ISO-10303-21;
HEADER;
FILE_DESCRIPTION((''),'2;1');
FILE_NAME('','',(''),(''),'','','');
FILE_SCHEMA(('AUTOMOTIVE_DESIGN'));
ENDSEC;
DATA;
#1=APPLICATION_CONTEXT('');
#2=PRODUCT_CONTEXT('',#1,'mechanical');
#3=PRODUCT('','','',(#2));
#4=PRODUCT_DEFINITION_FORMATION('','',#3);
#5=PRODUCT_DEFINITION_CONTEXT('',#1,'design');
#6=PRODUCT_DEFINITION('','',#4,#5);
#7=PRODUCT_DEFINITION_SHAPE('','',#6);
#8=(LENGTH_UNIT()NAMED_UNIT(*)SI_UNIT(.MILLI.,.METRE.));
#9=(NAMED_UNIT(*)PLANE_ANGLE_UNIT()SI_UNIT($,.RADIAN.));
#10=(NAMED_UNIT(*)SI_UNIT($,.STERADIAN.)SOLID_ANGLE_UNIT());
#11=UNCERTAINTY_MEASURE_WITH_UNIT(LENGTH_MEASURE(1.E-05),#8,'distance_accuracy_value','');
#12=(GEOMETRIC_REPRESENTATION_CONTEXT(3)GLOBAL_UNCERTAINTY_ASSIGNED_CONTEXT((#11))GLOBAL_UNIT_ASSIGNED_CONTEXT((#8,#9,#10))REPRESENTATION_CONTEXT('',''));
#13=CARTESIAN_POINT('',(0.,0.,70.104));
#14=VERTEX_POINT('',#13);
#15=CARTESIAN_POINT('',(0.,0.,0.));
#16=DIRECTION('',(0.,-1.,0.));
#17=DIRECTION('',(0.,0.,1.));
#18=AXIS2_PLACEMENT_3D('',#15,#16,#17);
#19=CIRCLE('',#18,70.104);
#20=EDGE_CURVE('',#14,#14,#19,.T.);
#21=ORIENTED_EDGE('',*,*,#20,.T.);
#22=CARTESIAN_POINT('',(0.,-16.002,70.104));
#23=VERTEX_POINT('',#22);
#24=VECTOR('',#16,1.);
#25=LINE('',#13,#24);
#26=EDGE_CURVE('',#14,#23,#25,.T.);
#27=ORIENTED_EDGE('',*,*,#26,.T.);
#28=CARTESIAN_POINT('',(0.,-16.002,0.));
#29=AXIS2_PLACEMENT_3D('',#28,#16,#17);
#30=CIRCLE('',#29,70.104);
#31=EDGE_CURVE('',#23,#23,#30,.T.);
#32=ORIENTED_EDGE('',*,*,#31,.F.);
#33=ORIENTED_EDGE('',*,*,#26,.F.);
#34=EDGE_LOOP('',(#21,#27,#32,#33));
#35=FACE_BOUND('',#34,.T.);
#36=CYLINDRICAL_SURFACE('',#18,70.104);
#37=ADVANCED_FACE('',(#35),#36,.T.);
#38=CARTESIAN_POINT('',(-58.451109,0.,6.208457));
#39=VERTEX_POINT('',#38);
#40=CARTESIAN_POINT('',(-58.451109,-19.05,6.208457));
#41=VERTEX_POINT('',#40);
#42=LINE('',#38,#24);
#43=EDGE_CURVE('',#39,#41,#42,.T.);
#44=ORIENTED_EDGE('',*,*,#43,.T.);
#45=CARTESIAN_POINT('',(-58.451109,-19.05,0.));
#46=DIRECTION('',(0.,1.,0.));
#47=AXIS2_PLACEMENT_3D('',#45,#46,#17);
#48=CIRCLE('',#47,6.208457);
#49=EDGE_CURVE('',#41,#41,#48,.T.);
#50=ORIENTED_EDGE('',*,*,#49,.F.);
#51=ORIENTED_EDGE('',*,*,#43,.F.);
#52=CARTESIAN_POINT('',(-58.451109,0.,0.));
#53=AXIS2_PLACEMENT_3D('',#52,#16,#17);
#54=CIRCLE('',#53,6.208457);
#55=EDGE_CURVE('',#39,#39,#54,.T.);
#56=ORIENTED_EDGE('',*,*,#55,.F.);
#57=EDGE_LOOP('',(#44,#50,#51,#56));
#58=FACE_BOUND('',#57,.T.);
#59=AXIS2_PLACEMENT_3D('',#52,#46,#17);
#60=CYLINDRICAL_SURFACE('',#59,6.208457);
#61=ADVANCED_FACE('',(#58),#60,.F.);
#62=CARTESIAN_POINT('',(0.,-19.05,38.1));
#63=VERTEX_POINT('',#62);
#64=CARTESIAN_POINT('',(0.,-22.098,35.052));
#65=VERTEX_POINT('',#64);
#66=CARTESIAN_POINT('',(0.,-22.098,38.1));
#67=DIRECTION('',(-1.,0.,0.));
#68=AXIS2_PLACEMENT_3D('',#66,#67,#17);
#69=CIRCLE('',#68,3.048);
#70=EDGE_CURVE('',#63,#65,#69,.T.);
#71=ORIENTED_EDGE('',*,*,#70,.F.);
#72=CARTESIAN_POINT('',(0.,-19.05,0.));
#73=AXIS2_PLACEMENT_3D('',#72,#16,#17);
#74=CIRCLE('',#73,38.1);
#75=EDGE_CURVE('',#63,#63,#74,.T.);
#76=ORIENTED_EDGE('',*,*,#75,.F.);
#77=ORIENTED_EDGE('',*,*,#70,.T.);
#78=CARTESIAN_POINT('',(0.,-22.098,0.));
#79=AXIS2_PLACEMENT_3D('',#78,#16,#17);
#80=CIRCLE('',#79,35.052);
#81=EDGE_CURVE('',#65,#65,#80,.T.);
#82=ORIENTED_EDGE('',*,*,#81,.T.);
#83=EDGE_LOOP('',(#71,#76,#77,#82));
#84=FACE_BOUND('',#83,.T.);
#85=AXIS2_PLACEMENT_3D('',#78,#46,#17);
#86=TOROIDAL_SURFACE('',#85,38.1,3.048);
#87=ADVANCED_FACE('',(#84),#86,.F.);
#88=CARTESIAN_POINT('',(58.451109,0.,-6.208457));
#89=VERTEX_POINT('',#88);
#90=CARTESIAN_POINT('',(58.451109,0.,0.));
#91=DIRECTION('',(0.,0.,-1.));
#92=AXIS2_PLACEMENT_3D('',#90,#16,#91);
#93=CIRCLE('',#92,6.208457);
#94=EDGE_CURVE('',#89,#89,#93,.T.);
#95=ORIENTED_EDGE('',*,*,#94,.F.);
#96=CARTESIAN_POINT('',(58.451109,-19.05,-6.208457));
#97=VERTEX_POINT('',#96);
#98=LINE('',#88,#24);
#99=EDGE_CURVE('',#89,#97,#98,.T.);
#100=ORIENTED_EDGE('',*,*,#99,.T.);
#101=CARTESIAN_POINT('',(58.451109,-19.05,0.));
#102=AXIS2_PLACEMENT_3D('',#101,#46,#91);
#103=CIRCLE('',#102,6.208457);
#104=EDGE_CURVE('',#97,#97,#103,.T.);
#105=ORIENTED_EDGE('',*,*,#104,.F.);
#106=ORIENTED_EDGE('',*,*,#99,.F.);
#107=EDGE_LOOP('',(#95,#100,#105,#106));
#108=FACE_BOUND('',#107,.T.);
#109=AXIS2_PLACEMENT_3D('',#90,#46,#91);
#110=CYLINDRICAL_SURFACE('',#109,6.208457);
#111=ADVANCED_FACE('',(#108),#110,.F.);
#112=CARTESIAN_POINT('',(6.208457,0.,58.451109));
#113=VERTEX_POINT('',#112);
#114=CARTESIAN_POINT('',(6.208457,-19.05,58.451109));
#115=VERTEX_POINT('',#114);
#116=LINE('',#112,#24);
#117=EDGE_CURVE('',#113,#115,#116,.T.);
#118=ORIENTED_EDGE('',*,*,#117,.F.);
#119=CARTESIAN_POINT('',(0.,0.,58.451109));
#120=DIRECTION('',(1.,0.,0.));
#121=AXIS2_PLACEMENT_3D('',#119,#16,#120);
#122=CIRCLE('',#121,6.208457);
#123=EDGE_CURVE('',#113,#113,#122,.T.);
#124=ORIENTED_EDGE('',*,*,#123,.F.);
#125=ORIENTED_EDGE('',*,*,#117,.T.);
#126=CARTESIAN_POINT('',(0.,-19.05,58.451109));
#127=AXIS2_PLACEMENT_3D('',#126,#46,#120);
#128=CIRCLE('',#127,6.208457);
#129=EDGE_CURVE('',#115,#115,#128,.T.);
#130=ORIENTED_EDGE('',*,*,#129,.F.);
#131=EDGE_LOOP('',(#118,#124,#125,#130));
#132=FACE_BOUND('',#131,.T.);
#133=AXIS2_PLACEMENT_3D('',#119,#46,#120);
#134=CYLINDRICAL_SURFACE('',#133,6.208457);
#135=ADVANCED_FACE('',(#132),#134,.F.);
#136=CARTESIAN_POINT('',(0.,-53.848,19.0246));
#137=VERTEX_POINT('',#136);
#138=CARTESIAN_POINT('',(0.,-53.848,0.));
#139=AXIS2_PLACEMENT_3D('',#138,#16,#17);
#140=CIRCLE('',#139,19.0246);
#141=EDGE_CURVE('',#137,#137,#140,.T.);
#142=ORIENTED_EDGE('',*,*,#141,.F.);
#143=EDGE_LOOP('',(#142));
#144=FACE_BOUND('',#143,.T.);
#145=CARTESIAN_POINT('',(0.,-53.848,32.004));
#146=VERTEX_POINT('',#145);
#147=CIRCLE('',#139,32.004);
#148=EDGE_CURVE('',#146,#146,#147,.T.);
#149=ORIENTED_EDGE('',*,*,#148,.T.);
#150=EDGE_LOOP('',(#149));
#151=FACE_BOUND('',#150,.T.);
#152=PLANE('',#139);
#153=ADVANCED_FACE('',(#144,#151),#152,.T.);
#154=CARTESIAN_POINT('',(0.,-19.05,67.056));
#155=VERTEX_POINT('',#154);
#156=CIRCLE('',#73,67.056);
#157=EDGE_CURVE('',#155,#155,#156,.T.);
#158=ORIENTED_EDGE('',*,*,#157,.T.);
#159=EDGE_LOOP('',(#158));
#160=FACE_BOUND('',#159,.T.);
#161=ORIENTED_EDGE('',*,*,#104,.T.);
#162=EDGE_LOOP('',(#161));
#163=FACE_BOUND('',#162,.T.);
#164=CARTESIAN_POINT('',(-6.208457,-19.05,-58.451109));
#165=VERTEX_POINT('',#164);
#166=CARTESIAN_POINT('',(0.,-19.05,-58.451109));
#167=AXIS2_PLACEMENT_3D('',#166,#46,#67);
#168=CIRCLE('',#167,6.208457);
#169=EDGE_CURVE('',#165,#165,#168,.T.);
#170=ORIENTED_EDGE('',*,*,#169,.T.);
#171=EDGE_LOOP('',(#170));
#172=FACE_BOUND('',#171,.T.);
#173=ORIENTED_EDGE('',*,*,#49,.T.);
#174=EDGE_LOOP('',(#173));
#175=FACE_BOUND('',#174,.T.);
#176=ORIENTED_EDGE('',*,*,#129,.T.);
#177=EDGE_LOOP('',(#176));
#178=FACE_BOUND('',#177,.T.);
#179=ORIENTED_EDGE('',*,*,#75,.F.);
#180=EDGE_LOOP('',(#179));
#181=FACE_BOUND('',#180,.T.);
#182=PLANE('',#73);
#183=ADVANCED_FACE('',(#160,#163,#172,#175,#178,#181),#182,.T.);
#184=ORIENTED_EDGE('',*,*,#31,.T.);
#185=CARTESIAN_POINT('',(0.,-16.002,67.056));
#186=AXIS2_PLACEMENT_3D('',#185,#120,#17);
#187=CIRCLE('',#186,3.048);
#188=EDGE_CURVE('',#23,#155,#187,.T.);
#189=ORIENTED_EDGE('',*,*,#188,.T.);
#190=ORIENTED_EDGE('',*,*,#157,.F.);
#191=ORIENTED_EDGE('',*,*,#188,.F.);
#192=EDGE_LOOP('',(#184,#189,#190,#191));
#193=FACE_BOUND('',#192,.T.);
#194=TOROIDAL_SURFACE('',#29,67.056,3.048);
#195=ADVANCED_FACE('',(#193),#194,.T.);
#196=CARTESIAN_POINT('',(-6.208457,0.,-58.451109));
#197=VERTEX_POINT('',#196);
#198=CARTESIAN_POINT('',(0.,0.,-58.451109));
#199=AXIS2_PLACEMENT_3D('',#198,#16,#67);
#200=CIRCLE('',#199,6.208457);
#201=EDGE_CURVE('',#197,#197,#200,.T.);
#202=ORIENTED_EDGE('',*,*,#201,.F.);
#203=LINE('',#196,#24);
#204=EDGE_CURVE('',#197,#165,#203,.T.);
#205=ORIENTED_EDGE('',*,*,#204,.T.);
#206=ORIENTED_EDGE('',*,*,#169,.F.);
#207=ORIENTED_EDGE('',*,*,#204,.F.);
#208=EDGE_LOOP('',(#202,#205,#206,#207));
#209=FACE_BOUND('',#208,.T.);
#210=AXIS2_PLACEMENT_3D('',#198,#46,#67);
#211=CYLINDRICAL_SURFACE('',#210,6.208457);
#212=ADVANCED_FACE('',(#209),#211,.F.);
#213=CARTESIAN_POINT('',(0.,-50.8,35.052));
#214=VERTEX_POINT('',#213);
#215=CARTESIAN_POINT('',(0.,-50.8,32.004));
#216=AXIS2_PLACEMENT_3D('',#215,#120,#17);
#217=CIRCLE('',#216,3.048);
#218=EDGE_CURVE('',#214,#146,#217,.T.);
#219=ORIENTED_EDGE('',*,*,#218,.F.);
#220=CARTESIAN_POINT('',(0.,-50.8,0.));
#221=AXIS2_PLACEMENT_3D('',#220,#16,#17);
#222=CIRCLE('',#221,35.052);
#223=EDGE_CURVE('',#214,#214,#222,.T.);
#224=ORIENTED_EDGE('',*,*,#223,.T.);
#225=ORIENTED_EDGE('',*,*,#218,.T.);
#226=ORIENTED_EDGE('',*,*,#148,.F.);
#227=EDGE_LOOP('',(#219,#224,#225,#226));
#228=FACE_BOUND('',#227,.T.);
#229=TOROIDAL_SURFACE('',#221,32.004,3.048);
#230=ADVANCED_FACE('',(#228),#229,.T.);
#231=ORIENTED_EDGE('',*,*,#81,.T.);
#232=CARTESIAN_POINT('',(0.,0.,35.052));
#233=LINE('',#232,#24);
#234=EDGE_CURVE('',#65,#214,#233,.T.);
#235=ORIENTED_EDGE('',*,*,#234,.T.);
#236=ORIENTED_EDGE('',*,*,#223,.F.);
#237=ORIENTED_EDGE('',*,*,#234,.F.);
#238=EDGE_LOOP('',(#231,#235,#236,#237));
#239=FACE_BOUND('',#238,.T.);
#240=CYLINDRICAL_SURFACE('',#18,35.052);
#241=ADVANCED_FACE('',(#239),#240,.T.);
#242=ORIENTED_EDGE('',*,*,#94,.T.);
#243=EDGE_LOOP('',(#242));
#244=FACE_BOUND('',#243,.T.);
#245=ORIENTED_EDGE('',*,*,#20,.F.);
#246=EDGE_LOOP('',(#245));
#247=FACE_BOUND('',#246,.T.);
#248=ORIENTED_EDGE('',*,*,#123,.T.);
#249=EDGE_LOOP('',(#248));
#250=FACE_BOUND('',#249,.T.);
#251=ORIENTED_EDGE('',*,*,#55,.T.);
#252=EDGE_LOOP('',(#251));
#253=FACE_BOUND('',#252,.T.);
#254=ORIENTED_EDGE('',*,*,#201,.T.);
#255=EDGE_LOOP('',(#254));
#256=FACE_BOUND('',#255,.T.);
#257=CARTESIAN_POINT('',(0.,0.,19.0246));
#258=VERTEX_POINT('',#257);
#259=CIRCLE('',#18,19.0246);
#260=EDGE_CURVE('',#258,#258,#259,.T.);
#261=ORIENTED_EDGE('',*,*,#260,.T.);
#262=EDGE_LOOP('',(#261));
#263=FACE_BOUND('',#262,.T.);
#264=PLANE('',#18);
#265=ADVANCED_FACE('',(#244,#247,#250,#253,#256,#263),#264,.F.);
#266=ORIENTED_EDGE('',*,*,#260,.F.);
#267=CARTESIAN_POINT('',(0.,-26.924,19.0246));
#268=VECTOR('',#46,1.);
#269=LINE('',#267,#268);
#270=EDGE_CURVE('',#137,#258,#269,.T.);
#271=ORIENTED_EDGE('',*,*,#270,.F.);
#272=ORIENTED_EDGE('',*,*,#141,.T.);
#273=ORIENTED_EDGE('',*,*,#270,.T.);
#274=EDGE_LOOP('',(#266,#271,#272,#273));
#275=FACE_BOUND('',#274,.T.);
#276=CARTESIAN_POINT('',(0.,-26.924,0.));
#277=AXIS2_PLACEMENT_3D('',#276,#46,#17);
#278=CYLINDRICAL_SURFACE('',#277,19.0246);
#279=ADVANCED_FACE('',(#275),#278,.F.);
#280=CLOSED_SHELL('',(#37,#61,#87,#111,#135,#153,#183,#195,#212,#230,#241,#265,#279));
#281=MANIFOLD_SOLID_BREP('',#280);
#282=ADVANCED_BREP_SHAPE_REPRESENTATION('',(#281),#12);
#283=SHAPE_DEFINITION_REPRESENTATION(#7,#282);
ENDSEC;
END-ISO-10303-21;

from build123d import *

# Parameters (mm, degrees)
F2_R            = 6.2084574244
F3_DEPTH        = 53.848
F3_COPIES_COUNT = 4
F6_W            = 53.848
F6_H            = 19.0246
F8_R            = 3.048


# Not quite as in the source:
# - a pattern or mirror of a feature is missing from the dataset's text; its kind, count and spacing are read off the source's solid


with BuildPart() as f1:
    # F0 (on Right) → F1 (revolve)
    with BuildSketch(Plane.YZ):
        with BuildLine():
            Line((-19.05, 0), (0, 0))
            Line((0, 0), (0, 70.104))
            Line((0, 70.104), (-16.002, 70.104))
            ThreePointArc((-16.002, 70.104), (-18.1572614691, 69.2112614691), (-19.05, 67.056))
            Line((-19.05, 67.056), (-19.05, 0))
        make_face()
    revolve(axis=Axis((0, -9.525, 0), (0, -1, 0)))

    # F2 (on Front) → F3 (cut)
    with BuildSketch(Plane.XZ):
        with Locations((0, 58.4511086345)):
            Circle(F2_R)
    f3 = extrude(amount=F3_DEPTH, mode=Mode.SUBTRACT)

    # F3_copies: F3 ×4 about axis
    f3_copies_axis = Axis((0, 0, 0), (0, 1, 0))
    for i in range(1, F3_COPIES_COUNT):
        add(f3.rotate(f3_copies_axis, i * 360 / F3_COPIES_COUNT), mode=Mode.SUBTRACT)

    # F4 (on Right) → F5 (revolve)
    with BuildSketch(Plane.YZ):
        with BuildLine():
            Line((-53.848, 0), (0, 0))
            Line((0, 0), (0, 35.052))
            Line((0, 35.052), (-50.8, 35.052))
            ThreePointArc((-50.8, 35.052), (-52.9552614691, 34.1592614691), (-53.848, 32.004))
            Line((-53.848, 32.004), (-53.848, 0))
        make_face()
    revolve(axis=Axis((0, -26.924, 0), (0, -1, 0)))

    # F6 (on Right) → F7 (revolve, cut)
    with BuildSketch(Plane.YZ):
        with Locations((-26.924, 9.5123)):
            Rectangle(F6_W, F6_H)
    revolve(axis=Axis((0, -26.924, 0), (0, -1, 0)), mode=Mode.SUBTRACT)

    # F8
    f8_edges = [f1.edges().sort_by_distance(p)[0] for p in [
        (0, -19.05, -35.052),
    ]]
    fillet(f8_edges, radius=F8_R)


solid = f1.part
